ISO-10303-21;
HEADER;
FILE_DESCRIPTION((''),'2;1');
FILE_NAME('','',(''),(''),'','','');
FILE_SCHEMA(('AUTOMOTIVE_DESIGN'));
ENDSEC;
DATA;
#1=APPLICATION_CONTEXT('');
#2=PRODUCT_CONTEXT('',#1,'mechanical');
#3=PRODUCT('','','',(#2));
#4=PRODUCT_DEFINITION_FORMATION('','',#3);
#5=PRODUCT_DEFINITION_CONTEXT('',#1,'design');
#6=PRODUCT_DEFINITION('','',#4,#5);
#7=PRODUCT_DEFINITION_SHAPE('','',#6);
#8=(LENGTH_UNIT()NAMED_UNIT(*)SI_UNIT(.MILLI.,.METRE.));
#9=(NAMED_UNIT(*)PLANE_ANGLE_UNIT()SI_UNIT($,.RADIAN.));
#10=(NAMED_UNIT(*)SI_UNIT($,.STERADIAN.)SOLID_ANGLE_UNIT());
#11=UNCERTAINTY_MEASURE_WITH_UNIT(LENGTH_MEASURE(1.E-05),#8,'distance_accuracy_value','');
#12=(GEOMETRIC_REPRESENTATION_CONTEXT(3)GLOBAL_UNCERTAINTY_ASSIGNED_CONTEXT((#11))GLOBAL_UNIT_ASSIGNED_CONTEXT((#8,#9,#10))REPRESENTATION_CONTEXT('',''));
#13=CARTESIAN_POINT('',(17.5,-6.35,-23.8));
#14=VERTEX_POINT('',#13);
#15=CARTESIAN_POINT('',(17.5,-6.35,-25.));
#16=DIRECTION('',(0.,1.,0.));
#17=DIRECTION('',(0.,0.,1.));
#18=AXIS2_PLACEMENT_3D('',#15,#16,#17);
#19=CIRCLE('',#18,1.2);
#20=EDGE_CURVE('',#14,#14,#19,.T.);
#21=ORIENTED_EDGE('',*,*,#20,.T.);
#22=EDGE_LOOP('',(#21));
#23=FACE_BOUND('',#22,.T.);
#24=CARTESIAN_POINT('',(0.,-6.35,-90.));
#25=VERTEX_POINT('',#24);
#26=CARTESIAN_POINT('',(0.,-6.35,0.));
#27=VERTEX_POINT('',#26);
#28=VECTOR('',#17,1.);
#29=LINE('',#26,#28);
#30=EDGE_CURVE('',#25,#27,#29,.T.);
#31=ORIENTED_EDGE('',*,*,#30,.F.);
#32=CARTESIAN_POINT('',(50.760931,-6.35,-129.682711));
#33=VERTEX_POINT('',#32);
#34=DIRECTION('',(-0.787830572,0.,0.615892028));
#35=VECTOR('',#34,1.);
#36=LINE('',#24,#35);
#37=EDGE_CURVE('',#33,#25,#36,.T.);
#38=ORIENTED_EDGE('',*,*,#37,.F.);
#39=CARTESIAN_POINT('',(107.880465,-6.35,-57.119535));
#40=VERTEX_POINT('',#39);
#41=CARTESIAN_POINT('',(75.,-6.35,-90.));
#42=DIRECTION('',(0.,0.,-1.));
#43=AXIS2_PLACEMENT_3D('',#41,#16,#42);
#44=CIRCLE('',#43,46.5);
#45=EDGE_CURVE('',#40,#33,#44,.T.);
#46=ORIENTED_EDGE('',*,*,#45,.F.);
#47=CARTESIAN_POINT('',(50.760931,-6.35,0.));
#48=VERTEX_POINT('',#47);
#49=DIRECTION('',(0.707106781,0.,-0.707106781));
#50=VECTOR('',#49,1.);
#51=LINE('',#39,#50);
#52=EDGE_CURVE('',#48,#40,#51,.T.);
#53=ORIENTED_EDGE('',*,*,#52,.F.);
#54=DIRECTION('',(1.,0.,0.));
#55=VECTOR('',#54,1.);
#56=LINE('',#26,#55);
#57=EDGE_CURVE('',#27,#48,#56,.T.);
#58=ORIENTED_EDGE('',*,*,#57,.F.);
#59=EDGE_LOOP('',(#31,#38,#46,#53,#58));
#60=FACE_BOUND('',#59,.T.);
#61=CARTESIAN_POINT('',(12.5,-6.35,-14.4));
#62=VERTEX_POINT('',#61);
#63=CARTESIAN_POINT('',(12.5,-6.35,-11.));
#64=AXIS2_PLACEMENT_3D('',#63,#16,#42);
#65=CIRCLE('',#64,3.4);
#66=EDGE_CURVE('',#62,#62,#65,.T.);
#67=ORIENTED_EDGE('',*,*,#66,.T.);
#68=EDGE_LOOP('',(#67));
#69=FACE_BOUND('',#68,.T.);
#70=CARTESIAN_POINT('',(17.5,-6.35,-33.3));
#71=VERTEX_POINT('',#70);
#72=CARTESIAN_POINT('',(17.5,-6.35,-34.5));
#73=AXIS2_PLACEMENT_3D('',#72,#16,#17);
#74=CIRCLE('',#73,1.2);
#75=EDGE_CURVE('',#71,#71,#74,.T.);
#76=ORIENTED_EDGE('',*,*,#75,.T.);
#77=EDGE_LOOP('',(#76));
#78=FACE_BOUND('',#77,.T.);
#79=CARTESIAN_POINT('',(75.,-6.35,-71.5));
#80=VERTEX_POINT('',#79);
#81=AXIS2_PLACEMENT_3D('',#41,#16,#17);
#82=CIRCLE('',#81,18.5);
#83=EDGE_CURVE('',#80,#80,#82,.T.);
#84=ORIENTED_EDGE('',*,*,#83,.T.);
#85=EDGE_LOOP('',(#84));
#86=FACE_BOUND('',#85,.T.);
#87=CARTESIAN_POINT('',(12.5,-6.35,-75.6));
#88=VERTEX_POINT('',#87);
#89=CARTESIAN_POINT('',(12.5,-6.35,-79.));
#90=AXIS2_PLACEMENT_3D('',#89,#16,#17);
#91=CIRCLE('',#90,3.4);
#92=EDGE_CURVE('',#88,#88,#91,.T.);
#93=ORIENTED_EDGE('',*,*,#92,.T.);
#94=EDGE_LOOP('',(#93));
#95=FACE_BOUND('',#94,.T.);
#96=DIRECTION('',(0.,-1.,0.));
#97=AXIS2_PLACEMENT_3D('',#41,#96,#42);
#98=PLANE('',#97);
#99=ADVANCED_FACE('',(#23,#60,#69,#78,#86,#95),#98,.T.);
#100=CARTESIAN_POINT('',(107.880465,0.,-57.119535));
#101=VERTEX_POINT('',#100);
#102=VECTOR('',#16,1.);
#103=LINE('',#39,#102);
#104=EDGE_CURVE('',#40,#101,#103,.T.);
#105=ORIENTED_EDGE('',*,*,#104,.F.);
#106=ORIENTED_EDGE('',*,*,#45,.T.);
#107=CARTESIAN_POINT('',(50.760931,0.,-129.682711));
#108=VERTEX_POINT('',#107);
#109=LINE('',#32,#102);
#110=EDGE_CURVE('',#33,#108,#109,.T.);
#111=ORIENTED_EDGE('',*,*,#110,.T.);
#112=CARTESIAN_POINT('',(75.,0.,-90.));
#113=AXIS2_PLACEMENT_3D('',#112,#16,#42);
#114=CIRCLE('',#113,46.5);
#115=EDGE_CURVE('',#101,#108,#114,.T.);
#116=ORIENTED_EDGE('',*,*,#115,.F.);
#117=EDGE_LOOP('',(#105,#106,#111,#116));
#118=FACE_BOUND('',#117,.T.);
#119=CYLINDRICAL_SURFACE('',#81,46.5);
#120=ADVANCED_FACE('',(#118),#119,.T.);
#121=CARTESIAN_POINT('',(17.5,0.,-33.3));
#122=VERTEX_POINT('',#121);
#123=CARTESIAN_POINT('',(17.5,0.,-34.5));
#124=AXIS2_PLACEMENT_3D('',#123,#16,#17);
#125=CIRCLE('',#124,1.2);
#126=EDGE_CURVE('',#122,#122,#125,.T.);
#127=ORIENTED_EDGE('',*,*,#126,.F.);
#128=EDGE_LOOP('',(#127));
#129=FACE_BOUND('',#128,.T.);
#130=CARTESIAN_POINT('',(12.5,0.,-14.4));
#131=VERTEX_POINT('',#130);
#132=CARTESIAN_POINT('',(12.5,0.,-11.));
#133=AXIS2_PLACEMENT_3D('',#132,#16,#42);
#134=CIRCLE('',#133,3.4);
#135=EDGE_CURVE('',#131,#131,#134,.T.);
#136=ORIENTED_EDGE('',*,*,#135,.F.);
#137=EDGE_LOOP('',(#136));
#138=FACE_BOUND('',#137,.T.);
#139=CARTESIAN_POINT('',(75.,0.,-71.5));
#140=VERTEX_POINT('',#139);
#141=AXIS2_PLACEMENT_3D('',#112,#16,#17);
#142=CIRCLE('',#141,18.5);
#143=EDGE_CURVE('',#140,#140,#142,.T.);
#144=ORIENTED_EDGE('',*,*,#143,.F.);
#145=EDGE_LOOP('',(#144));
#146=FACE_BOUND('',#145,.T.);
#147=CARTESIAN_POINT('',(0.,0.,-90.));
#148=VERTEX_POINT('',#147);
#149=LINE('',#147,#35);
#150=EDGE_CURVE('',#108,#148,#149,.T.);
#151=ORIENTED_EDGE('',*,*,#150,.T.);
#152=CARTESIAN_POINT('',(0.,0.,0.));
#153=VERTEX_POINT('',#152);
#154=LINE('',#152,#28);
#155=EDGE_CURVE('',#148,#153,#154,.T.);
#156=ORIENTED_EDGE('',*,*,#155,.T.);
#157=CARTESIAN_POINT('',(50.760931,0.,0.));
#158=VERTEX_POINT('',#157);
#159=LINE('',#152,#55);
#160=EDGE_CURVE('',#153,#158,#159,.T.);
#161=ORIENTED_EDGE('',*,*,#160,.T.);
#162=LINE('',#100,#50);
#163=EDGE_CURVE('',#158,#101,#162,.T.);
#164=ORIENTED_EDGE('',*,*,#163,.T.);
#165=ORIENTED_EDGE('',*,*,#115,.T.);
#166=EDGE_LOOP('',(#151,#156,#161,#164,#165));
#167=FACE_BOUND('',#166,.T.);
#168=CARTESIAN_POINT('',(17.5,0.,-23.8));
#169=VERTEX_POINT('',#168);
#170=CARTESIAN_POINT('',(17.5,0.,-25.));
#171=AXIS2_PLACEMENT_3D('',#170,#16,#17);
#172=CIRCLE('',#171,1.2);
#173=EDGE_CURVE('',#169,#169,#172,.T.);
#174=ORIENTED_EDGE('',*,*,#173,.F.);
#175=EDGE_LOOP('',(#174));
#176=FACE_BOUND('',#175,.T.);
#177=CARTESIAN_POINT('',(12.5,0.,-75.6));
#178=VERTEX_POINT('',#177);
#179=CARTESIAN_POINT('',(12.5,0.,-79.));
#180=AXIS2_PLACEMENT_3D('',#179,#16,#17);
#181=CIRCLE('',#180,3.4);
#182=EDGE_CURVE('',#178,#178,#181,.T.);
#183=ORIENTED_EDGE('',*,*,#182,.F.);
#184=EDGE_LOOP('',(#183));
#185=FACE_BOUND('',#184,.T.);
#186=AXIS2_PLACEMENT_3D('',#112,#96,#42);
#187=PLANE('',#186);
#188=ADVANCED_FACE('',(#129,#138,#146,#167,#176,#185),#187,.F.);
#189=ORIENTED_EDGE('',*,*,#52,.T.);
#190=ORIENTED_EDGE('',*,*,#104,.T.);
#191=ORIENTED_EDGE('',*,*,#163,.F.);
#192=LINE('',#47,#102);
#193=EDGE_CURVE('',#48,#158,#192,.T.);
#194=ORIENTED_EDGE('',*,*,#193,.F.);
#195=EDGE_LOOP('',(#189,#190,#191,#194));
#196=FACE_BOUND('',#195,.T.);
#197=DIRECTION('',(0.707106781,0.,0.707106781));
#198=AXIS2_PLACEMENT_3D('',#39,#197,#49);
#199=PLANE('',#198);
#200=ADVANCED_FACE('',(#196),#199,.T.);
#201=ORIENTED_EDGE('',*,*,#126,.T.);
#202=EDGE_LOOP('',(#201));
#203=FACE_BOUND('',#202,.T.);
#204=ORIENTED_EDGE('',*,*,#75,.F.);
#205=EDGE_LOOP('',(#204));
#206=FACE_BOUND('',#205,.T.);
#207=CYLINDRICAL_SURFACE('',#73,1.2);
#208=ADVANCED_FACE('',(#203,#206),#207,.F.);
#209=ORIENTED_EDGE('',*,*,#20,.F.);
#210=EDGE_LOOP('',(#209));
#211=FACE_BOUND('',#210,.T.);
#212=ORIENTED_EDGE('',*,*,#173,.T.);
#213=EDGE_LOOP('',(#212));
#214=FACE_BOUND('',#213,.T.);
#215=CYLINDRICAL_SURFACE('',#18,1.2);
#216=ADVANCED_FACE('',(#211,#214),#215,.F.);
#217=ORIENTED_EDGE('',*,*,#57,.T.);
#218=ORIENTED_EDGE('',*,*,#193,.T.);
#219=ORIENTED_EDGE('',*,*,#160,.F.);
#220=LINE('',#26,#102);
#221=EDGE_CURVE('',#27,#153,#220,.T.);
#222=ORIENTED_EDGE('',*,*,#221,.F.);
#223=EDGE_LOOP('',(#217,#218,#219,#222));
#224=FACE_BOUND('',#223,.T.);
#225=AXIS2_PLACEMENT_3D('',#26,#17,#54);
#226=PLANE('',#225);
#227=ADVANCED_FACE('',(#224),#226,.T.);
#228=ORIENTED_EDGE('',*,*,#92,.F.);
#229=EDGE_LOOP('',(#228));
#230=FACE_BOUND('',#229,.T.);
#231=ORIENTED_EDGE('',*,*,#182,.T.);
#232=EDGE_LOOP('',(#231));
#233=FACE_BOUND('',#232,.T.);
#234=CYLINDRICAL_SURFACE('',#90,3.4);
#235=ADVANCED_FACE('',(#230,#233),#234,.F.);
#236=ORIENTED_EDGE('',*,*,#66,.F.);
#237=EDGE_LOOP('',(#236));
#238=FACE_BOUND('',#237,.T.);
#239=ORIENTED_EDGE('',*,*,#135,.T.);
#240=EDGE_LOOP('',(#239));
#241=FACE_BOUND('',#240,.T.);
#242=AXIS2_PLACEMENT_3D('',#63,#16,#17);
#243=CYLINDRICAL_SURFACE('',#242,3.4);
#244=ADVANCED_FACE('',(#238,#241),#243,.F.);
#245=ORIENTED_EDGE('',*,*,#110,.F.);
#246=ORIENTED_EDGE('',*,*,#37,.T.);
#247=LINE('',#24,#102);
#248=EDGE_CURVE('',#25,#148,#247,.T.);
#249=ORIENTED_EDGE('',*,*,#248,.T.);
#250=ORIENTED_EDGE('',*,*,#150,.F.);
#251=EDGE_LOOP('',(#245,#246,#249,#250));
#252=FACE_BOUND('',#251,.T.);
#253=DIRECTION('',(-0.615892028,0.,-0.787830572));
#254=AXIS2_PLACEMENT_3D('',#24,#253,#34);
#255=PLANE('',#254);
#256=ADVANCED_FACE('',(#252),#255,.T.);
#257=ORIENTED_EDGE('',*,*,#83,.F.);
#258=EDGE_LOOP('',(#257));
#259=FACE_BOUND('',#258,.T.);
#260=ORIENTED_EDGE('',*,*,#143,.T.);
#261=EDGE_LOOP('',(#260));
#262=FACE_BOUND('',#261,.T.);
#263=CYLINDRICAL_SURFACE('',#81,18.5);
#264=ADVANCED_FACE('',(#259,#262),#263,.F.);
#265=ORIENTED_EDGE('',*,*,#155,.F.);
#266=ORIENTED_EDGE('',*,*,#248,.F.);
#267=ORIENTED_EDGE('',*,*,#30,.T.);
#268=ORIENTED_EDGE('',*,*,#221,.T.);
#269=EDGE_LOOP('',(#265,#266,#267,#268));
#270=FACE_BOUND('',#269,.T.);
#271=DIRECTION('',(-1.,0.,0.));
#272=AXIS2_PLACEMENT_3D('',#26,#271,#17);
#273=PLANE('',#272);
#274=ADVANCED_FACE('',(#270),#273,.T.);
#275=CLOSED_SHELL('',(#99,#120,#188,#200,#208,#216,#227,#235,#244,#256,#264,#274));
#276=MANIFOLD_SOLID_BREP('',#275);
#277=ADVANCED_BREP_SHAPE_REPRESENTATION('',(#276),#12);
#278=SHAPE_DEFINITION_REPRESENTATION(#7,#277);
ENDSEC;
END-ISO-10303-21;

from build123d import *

# Parameters (mm, degrees)
BASE_FLANGE1_DEPTH = 6.35
SKETCH8_R          = 3.4
CUT_EXTRUDE1_DEPTH = 183.851914127
SKETCH9_R          = 18.5
CUT_EXTRUDE2_DEPTH = 183.851914127
SKETCH11_R         = 1.2
CUT_EXTRUDE4_DEPTH = 183.851914127


# Sheet-metal steps are written as plain solids
with BuildPart() as part:
    # Sketch2 → Base-Flange1 (new body)
    with BuildSketch(Plane(origin=(0, 0, 0), x_dir=(1, 0, 0), z_dir=(0, 1, 0))):
        with BuildLine():
            Line((0, 0), (50.76093065, 0))
            Line((50.76093065, 0), (107.880465325, 57.119534675))
            ThreePointArc((107.880465325, 57.119534675), (111.537953618, 118.761570635), (50.76093065, 129.682710556))
            Line((50.76093065, 129.682710556), (0, 90))
            Line((0, 90), (0, 0))
        make_face()
    extrude(amount=-BASE_FLANGE1_DEPTH)

    # Sketch8 → Cut-Extrude1 (cut, through all)
    with BuildSketch(Plane(origin=(0, 0, 0), x_dir=(1, 0, 0), z_dir=(0, 1, 0))):
        with Locations(Location((12.5, 79, 0), (0, 0, 270))):
            Circle(SKETCH8_R)
        with Locations(Location((12.5, 11, 0), (0, 0, 90))):
            Circle(SKETCH8_R)
    extrude(amount=-CUT_EXTRUDE1_DEPTH, mode=Mode.SUBTRACT)

    # Sketch9 → Cut-Extrude2 (cut, through all)
    with BuildSketch(Plane(origin=(0, 0, 0), x_dir=(1, 0, 0), z_dir=(0, 1, 0))):
        with Locations(Location((75, 90, 0), (0, 0, 270))):
            Circle(SKETCH9_R)
    extrude(amount=-CUT_EXTRUDE2_DEPTH, mode=Mode.SUBTRACT)

    # Sketch11 → Cut-Extrude4 (cut, through all)
    with BuildSketch(Plane(origin=(0, 0, 0), x_dir=(1, 0, 0), z_dir=(0, 1, 0))):
        with Locations(Location((17.5, 25, 0), (0, 0, 270))):
            Circle(SKETCH11_R)
        with Locations(Location((17.5, 34.5, 0), (0, 0, 270))):
            Circle(SKETCH11_R)
    extrude(amount=-CUT_EXTRUDE4_DEPTH, mode=Mode.SUBTRACT)


solid = part.part
